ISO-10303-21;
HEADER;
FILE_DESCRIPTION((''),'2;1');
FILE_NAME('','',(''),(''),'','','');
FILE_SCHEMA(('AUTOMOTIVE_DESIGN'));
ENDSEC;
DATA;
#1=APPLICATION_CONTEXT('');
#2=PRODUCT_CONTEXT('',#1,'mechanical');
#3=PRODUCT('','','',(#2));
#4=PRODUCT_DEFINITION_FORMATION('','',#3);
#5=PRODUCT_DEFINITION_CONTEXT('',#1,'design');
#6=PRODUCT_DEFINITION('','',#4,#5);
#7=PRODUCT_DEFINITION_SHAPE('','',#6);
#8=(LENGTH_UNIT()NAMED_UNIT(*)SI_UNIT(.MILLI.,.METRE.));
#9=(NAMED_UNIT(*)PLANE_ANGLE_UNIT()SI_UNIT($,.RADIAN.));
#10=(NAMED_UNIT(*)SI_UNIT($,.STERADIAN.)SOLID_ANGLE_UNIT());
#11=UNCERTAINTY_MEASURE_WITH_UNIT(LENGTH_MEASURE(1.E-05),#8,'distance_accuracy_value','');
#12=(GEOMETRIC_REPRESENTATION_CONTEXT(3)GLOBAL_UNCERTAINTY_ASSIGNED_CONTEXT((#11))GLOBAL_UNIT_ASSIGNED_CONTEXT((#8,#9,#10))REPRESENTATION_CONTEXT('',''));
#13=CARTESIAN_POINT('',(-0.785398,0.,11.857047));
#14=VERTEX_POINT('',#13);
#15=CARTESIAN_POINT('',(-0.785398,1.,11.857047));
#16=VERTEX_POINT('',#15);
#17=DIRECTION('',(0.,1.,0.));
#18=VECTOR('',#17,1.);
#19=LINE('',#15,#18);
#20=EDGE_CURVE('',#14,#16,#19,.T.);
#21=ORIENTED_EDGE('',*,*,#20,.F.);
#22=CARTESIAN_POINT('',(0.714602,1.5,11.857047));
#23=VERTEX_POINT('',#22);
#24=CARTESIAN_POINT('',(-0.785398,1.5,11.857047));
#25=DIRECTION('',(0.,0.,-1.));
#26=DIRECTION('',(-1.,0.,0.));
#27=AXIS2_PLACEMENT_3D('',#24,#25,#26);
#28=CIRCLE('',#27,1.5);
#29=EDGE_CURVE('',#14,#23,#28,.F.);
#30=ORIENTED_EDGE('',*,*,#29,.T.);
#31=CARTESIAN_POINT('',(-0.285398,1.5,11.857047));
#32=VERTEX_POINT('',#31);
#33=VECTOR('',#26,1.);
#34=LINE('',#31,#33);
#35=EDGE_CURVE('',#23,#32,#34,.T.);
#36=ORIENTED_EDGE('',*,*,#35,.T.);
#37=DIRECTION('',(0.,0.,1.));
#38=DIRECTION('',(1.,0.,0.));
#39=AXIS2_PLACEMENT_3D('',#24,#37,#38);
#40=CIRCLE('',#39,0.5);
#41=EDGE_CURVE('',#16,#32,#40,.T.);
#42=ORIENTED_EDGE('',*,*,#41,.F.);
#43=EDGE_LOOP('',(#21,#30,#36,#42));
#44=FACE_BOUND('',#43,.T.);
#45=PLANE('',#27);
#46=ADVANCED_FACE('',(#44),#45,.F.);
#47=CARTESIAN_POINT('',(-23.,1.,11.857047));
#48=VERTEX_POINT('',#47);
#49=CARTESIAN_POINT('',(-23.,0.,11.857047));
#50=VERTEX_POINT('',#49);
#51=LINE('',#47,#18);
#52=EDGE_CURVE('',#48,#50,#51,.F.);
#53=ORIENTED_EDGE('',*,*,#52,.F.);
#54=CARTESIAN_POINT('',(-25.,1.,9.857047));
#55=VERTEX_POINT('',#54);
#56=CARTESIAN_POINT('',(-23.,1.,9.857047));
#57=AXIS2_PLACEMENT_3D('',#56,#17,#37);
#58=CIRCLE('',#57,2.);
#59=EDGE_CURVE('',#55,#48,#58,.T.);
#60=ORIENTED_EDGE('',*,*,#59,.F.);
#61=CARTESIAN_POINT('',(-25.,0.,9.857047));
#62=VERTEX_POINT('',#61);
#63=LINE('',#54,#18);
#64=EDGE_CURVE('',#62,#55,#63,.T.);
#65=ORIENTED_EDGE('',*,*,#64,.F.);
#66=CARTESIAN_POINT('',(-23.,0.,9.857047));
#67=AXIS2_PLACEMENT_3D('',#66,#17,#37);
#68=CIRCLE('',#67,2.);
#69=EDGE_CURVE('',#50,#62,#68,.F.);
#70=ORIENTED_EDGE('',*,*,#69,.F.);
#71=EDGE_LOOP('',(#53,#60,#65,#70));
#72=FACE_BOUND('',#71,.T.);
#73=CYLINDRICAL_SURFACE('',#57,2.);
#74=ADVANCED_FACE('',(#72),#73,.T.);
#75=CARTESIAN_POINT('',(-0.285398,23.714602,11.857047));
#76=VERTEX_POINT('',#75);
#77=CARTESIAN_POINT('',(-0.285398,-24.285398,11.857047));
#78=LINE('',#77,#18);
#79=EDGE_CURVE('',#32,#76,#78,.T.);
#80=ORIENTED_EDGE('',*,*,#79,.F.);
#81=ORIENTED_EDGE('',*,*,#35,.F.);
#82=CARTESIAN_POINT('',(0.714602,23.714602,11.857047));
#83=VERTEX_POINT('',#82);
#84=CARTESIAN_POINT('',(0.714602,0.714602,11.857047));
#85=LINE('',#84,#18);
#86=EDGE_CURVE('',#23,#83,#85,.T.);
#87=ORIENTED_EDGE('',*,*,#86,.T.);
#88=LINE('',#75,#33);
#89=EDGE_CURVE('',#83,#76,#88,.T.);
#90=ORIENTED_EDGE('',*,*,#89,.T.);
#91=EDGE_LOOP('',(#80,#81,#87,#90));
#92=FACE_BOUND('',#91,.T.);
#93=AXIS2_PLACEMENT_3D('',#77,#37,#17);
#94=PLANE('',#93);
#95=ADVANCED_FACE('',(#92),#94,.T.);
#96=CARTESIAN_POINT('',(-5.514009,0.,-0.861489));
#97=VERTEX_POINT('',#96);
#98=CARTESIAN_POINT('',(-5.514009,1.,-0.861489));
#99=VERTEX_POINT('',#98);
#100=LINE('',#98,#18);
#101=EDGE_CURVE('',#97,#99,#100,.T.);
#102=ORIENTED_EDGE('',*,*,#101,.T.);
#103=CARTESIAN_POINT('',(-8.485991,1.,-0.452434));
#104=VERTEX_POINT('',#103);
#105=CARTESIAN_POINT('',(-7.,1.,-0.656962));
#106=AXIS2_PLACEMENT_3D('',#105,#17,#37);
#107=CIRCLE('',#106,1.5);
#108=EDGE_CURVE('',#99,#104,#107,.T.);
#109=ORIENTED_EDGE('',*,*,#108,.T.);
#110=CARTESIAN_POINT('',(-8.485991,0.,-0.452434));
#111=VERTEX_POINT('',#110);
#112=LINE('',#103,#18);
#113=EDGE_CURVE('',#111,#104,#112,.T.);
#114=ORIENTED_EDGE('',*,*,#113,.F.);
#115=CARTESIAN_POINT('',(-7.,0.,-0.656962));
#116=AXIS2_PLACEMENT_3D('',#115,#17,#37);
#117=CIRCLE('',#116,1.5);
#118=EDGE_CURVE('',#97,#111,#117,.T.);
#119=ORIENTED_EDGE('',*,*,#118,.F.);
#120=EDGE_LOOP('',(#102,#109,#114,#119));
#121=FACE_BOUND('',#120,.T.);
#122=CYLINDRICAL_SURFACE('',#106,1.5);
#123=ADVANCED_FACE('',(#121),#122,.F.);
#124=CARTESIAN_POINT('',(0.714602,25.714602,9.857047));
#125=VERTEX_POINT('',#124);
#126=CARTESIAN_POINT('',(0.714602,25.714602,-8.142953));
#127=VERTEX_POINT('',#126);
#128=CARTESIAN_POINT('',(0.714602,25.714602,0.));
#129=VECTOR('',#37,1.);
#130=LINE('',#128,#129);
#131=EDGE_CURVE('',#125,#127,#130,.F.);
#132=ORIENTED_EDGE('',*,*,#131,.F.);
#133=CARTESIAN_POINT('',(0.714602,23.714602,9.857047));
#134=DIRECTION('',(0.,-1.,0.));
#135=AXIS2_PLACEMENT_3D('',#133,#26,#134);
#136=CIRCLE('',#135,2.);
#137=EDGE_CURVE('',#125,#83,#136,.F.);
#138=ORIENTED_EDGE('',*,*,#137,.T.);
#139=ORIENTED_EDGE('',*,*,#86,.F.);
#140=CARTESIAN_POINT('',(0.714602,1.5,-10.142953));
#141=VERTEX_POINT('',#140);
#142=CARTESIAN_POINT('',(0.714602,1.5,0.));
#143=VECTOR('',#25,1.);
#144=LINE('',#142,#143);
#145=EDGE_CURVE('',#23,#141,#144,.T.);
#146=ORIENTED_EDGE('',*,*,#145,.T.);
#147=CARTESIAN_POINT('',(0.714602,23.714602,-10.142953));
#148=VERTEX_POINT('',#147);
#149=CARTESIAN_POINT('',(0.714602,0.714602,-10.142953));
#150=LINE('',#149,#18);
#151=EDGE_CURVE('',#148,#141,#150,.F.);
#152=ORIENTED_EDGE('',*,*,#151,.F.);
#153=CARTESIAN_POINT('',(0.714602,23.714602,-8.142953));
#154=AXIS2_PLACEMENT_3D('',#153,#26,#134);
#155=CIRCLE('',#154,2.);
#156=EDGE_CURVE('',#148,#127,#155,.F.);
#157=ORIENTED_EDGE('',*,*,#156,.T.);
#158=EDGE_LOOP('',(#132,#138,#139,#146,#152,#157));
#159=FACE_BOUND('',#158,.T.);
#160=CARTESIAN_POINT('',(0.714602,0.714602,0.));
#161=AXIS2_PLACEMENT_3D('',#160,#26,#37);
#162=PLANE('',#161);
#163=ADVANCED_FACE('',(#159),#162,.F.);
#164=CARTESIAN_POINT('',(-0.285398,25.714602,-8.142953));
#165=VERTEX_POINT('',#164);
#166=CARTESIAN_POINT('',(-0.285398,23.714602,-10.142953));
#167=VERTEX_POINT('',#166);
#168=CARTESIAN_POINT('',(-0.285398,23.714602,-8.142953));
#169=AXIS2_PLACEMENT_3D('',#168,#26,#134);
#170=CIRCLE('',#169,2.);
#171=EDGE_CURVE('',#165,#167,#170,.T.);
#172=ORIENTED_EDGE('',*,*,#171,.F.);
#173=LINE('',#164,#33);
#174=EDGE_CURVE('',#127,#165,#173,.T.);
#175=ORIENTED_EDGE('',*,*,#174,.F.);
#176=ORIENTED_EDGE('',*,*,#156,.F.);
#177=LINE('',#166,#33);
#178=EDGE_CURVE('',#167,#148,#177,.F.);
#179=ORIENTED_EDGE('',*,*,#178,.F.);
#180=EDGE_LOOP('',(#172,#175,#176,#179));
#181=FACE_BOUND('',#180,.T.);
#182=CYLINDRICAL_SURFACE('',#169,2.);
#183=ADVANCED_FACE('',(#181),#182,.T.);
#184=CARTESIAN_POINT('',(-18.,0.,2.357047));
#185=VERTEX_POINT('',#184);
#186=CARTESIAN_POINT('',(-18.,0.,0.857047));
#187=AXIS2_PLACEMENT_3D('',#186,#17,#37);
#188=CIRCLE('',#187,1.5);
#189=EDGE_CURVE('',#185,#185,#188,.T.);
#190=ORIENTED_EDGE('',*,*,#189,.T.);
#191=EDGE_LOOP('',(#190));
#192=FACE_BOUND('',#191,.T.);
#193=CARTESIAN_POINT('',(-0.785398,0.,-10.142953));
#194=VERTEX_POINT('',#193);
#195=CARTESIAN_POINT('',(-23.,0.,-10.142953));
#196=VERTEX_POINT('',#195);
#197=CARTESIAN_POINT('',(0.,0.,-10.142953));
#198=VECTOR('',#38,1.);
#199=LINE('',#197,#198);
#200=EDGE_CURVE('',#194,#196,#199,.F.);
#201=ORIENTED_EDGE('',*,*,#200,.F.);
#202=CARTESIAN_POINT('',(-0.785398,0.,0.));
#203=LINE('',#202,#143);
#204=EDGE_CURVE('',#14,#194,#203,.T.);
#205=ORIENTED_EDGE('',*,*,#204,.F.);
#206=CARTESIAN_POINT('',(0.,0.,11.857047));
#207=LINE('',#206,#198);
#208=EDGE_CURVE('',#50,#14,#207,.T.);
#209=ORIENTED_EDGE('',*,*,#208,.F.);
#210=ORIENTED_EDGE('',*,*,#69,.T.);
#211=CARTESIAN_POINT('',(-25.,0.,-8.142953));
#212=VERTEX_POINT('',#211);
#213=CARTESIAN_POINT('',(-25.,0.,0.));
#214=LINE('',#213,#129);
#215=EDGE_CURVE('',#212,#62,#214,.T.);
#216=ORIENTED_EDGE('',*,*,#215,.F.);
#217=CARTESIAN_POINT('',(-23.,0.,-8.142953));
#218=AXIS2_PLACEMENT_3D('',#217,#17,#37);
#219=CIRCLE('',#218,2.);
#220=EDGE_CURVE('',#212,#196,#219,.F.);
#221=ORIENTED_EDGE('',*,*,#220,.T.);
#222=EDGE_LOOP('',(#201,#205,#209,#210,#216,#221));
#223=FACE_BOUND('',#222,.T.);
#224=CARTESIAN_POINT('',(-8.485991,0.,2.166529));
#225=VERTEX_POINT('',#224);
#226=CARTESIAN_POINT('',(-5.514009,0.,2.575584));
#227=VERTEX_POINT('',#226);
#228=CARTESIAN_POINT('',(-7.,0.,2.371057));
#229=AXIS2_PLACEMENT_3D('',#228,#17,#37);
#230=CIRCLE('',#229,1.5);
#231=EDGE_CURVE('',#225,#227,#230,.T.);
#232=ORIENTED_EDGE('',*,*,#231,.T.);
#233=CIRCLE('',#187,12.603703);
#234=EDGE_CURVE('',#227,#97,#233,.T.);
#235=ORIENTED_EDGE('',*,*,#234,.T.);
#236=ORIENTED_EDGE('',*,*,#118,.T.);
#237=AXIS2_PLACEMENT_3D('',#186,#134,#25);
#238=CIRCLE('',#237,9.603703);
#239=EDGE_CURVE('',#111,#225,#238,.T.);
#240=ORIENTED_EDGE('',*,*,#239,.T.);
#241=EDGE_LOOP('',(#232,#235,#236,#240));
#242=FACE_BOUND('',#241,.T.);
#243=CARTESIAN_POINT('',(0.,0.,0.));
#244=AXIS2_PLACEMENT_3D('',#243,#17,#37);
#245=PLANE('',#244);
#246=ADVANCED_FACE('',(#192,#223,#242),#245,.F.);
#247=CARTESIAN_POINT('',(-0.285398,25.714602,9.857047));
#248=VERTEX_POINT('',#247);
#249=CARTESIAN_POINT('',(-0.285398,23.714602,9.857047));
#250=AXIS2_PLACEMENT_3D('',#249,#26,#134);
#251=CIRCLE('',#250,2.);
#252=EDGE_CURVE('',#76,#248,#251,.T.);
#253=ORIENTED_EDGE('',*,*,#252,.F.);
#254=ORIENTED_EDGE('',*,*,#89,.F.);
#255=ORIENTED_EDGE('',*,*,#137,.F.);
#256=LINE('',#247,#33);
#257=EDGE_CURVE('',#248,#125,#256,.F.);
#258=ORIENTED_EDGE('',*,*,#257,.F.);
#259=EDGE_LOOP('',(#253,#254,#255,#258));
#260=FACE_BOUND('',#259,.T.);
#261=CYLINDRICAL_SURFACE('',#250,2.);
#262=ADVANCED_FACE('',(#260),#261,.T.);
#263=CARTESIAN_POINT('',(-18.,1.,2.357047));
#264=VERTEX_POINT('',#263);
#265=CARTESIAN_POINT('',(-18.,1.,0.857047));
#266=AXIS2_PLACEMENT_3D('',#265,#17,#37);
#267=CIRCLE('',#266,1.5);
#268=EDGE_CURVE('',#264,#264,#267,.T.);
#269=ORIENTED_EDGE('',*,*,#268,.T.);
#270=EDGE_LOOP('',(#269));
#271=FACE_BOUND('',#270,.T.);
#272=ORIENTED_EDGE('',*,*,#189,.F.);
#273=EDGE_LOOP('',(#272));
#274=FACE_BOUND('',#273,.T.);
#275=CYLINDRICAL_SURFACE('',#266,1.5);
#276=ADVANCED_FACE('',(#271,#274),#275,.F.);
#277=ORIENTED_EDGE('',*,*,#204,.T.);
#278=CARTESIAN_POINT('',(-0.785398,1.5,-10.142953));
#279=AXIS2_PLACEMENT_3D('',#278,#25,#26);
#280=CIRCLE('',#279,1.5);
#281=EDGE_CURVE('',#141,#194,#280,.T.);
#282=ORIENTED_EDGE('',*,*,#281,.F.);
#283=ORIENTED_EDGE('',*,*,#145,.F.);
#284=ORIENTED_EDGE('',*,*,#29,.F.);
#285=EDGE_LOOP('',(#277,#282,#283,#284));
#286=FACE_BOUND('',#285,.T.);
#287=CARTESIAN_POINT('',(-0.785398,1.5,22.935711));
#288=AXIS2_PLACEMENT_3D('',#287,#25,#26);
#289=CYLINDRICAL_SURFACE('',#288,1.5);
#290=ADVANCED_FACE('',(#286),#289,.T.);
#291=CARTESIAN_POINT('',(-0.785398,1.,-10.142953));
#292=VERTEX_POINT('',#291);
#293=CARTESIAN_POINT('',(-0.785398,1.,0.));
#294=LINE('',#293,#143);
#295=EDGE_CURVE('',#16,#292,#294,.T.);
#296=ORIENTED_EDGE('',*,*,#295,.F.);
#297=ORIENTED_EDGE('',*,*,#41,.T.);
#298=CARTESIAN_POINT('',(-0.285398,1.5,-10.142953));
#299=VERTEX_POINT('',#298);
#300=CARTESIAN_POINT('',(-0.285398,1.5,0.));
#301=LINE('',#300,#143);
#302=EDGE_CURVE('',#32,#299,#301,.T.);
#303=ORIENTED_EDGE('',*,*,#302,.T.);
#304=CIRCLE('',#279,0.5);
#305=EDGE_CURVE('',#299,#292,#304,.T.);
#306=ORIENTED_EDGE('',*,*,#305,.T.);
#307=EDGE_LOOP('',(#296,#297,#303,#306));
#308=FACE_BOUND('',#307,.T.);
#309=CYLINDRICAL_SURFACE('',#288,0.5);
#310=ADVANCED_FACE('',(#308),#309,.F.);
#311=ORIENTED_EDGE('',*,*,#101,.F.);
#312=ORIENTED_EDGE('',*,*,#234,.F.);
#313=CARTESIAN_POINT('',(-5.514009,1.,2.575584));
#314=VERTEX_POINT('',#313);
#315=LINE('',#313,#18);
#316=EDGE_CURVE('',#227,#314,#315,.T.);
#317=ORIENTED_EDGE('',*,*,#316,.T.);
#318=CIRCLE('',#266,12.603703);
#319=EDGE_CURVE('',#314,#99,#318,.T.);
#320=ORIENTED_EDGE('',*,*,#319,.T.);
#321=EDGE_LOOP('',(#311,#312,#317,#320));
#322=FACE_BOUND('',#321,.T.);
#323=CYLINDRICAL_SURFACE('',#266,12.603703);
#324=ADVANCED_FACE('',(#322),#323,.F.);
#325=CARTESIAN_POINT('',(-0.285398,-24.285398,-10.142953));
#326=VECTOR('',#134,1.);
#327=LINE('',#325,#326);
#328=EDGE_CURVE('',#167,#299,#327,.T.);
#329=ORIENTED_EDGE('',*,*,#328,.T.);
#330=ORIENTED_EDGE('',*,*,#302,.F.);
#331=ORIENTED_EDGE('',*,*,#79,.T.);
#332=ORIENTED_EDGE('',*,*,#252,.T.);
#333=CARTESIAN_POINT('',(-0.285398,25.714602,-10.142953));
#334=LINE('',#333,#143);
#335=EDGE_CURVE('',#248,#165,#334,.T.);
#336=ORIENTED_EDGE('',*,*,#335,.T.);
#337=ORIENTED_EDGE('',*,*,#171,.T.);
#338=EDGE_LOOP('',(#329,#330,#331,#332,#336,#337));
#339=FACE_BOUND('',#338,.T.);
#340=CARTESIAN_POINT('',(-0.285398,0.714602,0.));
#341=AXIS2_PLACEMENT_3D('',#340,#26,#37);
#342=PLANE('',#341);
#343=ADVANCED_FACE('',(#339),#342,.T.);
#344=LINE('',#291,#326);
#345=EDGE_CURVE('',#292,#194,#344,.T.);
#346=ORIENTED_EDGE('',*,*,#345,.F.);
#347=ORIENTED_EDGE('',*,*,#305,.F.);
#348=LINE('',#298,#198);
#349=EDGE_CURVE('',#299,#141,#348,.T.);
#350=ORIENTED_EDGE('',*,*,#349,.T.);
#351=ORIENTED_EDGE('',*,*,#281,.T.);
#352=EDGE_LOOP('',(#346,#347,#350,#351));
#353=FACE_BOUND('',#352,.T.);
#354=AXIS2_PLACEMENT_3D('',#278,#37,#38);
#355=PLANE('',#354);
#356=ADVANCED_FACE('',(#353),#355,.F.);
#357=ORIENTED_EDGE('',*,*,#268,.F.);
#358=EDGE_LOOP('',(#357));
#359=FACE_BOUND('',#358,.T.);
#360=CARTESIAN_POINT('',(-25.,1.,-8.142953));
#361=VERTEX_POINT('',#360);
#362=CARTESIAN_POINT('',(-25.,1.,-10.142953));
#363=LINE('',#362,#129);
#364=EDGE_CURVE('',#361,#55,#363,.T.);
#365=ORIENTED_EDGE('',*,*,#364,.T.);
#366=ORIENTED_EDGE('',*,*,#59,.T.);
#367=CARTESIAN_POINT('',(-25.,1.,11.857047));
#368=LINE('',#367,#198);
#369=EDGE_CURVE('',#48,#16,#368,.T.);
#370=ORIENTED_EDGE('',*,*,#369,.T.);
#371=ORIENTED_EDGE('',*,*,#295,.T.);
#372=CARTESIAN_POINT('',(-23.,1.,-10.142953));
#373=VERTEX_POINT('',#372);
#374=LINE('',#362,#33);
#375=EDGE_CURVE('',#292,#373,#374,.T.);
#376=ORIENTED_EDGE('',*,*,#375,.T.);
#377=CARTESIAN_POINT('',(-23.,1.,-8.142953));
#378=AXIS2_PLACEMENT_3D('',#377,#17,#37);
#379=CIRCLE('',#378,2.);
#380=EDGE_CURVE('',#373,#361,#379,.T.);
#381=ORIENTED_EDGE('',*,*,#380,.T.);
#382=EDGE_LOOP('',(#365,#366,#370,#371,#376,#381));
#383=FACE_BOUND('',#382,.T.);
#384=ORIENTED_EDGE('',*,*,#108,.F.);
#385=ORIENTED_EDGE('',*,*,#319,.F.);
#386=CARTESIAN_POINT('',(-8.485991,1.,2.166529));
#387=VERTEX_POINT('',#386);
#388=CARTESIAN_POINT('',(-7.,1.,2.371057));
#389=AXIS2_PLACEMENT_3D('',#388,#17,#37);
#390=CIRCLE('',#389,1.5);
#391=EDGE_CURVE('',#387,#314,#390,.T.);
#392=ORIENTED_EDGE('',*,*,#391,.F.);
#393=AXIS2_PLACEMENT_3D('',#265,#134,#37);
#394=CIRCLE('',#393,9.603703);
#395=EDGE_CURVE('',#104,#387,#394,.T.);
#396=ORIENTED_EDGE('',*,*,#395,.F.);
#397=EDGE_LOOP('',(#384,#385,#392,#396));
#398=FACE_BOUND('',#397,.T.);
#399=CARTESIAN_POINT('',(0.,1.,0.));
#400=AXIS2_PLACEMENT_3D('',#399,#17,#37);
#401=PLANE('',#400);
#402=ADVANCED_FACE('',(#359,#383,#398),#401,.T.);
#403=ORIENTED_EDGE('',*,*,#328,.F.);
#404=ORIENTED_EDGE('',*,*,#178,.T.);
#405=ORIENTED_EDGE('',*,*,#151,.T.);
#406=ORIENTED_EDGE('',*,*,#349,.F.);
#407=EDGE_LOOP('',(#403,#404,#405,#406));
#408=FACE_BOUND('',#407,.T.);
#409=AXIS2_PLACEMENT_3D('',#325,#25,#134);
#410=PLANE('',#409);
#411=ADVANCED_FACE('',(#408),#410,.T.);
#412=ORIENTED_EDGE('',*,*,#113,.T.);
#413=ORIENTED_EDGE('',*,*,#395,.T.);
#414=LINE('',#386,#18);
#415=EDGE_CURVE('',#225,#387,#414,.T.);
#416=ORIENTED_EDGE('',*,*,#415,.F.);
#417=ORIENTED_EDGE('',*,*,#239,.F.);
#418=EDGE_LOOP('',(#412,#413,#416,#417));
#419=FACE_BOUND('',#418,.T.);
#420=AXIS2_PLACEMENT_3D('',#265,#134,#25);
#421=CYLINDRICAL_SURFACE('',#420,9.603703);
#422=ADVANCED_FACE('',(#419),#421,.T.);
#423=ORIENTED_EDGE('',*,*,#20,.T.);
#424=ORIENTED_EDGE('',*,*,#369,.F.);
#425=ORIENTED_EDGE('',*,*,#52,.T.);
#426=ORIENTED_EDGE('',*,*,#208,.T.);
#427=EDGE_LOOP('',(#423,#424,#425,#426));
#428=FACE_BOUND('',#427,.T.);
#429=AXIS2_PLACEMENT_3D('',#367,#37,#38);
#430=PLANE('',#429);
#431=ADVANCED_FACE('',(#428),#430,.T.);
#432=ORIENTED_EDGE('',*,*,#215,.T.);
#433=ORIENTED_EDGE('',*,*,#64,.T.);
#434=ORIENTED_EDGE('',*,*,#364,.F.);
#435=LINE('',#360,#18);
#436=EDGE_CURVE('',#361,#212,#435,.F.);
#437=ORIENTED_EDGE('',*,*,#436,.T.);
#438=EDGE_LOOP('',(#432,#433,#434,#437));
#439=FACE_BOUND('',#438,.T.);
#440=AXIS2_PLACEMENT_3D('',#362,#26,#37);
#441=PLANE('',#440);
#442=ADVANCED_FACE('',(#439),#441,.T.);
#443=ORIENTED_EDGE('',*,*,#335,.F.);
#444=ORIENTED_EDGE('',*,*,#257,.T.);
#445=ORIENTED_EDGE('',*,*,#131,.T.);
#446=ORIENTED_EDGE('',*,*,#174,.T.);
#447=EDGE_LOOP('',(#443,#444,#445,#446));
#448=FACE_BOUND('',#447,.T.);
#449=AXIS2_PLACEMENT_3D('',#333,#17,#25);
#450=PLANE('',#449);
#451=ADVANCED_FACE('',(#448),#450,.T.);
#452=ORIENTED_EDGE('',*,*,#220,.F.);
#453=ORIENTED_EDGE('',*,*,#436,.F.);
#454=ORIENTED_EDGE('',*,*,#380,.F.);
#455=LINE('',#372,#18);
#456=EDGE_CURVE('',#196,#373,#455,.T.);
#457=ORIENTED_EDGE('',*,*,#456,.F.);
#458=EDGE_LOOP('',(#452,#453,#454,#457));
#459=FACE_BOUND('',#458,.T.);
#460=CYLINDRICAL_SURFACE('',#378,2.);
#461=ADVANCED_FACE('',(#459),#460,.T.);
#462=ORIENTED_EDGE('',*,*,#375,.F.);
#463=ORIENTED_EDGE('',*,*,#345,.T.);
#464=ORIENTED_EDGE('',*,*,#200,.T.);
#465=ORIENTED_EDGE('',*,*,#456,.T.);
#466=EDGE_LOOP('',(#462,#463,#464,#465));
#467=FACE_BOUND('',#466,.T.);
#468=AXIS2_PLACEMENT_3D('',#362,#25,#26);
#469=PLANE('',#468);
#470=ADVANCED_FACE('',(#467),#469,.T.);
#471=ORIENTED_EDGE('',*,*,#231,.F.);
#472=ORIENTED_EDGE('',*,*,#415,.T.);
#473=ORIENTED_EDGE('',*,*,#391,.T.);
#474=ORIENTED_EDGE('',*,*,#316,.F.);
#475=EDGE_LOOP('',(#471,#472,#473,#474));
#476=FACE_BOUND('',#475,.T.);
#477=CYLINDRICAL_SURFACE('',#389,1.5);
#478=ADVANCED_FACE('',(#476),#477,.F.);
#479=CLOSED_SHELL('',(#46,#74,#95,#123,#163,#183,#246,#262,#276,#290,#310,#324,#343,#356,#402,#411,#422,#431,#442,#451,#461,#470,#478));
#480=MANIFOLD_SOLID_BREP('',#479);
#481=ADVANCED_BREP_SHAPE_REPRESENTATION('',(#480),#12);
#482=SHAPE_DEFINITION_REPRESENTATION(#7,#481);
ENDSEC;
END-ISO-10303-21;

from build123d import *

# Parameters (mm, degrees)
SKETCH_1_W      = 50
SKETCH_1_H      = 22
SKETCH_1_R      = 1.5
EXTRUDE_1_DEPTH = 1
OTHER_START     = -10.142952565
OTHER_1_DEPTH   = 22
OTHER_1_2_DEPTH = 22
FILLET_1_R      = 2


# Read off the part's stored shape, not the designer's step: Нарисованный сгиб1
with BuildPart() as part:
    # Sketch 1 → Бобышка-Вытянуть1 (new body)
    with BuildSketch(Plane(origin=(0, 0, 0), x_dir=(1, 0, 0), z_dir=(0, 1, 0))):
        with Locations((0, -0.857047435)):
            Rectangle(SKETCH_1_W, SKETCH_1_H)
        with Locations(Location((-18, -0.857047435, 0), (0, 0, 270))):
            Circle(SKETCH_1_R, mode=Mode.SUBTRACT)
        with BuildLine():
            ThreePointArc((-5.514009268, -2.575584316), (-5.396296831, -0.857047435), (-5.514009268, 0.861489446))
            ThreePointArc((-5.514009268, 0.861489446), (-7.204527613, 2.142952565), (-8.485990732, 0.45243422))
            ThreePointArc((-8.485990732, 0.45243422), (-8.396296831, -0.857047435), (-8.485990732, -2.16652909))
            ThreePointArc((-8.485990732, -2.16652909), (-7.204527613, -3.857047435), (-5.514009268, -2.575584316))
        make_face(mode=Mode.SUBTRACT)
    extrude(amount=EXTRUDE_1_DEPTH)

    # Other 1 outline → Other 1 (cut)
    with BuildSketch(Plane.XY.offset(OTHER_START)):
        with BuildLine():
            Line((25, 1), (0.628815399, 1))
            ThreePointArc((0.628815399, 1), (0.08062724, 0.275255129), (-0.785398163, 0))
            Line((-0.785398163, 0), (25, 0))
            Line((25, 0), (25, 1))
        make_face()
    extrude(amount=OTHER_1_DEPTH, mode=Mode.SUBTRACT)

    # Other 1 2 outline → Other 1 2 (add)
    with BuildSketch(Plane.XY.offset(OTHER_START)):
        with BuildLine():
            Line((0.714601837, 1.5), (0.714601837, 25.714601837))
            Line((0.714601837, 25.714601837), (-0.285398163, 25.714601837))
            Line((-0.285398163, 25.714601837), (-0.285398163, 1.5))
            ThreePointArc((-0.285398163, 1.5), (-0.431844772, 1.146446609), (-0.785398163, 1))
            Line((-0.785398163, 1), (0.628815399, 1))
            ThreePointArc((0.628815399, 1), (0.692999676, 1.246347032), (0.714601837, 1.5))
        make_face()
    extrude(amount=OTHER_1_2_DEPTH)

    # Скругление1
    fillet_1_edges = [part.edges().sort_by_distance(p)[0] for p in [
        (0.214601837, 25.714601837, -10.142952565),
        (0.214601837, 25.714601837, 11.857047435),
        (-25, 0.5, 11.857047435),
        (-25, 0.5, -10.142952565),
    ]]
    fillet(fillet_1_edges, radius=FILLET_1_R)


solid = part.part
